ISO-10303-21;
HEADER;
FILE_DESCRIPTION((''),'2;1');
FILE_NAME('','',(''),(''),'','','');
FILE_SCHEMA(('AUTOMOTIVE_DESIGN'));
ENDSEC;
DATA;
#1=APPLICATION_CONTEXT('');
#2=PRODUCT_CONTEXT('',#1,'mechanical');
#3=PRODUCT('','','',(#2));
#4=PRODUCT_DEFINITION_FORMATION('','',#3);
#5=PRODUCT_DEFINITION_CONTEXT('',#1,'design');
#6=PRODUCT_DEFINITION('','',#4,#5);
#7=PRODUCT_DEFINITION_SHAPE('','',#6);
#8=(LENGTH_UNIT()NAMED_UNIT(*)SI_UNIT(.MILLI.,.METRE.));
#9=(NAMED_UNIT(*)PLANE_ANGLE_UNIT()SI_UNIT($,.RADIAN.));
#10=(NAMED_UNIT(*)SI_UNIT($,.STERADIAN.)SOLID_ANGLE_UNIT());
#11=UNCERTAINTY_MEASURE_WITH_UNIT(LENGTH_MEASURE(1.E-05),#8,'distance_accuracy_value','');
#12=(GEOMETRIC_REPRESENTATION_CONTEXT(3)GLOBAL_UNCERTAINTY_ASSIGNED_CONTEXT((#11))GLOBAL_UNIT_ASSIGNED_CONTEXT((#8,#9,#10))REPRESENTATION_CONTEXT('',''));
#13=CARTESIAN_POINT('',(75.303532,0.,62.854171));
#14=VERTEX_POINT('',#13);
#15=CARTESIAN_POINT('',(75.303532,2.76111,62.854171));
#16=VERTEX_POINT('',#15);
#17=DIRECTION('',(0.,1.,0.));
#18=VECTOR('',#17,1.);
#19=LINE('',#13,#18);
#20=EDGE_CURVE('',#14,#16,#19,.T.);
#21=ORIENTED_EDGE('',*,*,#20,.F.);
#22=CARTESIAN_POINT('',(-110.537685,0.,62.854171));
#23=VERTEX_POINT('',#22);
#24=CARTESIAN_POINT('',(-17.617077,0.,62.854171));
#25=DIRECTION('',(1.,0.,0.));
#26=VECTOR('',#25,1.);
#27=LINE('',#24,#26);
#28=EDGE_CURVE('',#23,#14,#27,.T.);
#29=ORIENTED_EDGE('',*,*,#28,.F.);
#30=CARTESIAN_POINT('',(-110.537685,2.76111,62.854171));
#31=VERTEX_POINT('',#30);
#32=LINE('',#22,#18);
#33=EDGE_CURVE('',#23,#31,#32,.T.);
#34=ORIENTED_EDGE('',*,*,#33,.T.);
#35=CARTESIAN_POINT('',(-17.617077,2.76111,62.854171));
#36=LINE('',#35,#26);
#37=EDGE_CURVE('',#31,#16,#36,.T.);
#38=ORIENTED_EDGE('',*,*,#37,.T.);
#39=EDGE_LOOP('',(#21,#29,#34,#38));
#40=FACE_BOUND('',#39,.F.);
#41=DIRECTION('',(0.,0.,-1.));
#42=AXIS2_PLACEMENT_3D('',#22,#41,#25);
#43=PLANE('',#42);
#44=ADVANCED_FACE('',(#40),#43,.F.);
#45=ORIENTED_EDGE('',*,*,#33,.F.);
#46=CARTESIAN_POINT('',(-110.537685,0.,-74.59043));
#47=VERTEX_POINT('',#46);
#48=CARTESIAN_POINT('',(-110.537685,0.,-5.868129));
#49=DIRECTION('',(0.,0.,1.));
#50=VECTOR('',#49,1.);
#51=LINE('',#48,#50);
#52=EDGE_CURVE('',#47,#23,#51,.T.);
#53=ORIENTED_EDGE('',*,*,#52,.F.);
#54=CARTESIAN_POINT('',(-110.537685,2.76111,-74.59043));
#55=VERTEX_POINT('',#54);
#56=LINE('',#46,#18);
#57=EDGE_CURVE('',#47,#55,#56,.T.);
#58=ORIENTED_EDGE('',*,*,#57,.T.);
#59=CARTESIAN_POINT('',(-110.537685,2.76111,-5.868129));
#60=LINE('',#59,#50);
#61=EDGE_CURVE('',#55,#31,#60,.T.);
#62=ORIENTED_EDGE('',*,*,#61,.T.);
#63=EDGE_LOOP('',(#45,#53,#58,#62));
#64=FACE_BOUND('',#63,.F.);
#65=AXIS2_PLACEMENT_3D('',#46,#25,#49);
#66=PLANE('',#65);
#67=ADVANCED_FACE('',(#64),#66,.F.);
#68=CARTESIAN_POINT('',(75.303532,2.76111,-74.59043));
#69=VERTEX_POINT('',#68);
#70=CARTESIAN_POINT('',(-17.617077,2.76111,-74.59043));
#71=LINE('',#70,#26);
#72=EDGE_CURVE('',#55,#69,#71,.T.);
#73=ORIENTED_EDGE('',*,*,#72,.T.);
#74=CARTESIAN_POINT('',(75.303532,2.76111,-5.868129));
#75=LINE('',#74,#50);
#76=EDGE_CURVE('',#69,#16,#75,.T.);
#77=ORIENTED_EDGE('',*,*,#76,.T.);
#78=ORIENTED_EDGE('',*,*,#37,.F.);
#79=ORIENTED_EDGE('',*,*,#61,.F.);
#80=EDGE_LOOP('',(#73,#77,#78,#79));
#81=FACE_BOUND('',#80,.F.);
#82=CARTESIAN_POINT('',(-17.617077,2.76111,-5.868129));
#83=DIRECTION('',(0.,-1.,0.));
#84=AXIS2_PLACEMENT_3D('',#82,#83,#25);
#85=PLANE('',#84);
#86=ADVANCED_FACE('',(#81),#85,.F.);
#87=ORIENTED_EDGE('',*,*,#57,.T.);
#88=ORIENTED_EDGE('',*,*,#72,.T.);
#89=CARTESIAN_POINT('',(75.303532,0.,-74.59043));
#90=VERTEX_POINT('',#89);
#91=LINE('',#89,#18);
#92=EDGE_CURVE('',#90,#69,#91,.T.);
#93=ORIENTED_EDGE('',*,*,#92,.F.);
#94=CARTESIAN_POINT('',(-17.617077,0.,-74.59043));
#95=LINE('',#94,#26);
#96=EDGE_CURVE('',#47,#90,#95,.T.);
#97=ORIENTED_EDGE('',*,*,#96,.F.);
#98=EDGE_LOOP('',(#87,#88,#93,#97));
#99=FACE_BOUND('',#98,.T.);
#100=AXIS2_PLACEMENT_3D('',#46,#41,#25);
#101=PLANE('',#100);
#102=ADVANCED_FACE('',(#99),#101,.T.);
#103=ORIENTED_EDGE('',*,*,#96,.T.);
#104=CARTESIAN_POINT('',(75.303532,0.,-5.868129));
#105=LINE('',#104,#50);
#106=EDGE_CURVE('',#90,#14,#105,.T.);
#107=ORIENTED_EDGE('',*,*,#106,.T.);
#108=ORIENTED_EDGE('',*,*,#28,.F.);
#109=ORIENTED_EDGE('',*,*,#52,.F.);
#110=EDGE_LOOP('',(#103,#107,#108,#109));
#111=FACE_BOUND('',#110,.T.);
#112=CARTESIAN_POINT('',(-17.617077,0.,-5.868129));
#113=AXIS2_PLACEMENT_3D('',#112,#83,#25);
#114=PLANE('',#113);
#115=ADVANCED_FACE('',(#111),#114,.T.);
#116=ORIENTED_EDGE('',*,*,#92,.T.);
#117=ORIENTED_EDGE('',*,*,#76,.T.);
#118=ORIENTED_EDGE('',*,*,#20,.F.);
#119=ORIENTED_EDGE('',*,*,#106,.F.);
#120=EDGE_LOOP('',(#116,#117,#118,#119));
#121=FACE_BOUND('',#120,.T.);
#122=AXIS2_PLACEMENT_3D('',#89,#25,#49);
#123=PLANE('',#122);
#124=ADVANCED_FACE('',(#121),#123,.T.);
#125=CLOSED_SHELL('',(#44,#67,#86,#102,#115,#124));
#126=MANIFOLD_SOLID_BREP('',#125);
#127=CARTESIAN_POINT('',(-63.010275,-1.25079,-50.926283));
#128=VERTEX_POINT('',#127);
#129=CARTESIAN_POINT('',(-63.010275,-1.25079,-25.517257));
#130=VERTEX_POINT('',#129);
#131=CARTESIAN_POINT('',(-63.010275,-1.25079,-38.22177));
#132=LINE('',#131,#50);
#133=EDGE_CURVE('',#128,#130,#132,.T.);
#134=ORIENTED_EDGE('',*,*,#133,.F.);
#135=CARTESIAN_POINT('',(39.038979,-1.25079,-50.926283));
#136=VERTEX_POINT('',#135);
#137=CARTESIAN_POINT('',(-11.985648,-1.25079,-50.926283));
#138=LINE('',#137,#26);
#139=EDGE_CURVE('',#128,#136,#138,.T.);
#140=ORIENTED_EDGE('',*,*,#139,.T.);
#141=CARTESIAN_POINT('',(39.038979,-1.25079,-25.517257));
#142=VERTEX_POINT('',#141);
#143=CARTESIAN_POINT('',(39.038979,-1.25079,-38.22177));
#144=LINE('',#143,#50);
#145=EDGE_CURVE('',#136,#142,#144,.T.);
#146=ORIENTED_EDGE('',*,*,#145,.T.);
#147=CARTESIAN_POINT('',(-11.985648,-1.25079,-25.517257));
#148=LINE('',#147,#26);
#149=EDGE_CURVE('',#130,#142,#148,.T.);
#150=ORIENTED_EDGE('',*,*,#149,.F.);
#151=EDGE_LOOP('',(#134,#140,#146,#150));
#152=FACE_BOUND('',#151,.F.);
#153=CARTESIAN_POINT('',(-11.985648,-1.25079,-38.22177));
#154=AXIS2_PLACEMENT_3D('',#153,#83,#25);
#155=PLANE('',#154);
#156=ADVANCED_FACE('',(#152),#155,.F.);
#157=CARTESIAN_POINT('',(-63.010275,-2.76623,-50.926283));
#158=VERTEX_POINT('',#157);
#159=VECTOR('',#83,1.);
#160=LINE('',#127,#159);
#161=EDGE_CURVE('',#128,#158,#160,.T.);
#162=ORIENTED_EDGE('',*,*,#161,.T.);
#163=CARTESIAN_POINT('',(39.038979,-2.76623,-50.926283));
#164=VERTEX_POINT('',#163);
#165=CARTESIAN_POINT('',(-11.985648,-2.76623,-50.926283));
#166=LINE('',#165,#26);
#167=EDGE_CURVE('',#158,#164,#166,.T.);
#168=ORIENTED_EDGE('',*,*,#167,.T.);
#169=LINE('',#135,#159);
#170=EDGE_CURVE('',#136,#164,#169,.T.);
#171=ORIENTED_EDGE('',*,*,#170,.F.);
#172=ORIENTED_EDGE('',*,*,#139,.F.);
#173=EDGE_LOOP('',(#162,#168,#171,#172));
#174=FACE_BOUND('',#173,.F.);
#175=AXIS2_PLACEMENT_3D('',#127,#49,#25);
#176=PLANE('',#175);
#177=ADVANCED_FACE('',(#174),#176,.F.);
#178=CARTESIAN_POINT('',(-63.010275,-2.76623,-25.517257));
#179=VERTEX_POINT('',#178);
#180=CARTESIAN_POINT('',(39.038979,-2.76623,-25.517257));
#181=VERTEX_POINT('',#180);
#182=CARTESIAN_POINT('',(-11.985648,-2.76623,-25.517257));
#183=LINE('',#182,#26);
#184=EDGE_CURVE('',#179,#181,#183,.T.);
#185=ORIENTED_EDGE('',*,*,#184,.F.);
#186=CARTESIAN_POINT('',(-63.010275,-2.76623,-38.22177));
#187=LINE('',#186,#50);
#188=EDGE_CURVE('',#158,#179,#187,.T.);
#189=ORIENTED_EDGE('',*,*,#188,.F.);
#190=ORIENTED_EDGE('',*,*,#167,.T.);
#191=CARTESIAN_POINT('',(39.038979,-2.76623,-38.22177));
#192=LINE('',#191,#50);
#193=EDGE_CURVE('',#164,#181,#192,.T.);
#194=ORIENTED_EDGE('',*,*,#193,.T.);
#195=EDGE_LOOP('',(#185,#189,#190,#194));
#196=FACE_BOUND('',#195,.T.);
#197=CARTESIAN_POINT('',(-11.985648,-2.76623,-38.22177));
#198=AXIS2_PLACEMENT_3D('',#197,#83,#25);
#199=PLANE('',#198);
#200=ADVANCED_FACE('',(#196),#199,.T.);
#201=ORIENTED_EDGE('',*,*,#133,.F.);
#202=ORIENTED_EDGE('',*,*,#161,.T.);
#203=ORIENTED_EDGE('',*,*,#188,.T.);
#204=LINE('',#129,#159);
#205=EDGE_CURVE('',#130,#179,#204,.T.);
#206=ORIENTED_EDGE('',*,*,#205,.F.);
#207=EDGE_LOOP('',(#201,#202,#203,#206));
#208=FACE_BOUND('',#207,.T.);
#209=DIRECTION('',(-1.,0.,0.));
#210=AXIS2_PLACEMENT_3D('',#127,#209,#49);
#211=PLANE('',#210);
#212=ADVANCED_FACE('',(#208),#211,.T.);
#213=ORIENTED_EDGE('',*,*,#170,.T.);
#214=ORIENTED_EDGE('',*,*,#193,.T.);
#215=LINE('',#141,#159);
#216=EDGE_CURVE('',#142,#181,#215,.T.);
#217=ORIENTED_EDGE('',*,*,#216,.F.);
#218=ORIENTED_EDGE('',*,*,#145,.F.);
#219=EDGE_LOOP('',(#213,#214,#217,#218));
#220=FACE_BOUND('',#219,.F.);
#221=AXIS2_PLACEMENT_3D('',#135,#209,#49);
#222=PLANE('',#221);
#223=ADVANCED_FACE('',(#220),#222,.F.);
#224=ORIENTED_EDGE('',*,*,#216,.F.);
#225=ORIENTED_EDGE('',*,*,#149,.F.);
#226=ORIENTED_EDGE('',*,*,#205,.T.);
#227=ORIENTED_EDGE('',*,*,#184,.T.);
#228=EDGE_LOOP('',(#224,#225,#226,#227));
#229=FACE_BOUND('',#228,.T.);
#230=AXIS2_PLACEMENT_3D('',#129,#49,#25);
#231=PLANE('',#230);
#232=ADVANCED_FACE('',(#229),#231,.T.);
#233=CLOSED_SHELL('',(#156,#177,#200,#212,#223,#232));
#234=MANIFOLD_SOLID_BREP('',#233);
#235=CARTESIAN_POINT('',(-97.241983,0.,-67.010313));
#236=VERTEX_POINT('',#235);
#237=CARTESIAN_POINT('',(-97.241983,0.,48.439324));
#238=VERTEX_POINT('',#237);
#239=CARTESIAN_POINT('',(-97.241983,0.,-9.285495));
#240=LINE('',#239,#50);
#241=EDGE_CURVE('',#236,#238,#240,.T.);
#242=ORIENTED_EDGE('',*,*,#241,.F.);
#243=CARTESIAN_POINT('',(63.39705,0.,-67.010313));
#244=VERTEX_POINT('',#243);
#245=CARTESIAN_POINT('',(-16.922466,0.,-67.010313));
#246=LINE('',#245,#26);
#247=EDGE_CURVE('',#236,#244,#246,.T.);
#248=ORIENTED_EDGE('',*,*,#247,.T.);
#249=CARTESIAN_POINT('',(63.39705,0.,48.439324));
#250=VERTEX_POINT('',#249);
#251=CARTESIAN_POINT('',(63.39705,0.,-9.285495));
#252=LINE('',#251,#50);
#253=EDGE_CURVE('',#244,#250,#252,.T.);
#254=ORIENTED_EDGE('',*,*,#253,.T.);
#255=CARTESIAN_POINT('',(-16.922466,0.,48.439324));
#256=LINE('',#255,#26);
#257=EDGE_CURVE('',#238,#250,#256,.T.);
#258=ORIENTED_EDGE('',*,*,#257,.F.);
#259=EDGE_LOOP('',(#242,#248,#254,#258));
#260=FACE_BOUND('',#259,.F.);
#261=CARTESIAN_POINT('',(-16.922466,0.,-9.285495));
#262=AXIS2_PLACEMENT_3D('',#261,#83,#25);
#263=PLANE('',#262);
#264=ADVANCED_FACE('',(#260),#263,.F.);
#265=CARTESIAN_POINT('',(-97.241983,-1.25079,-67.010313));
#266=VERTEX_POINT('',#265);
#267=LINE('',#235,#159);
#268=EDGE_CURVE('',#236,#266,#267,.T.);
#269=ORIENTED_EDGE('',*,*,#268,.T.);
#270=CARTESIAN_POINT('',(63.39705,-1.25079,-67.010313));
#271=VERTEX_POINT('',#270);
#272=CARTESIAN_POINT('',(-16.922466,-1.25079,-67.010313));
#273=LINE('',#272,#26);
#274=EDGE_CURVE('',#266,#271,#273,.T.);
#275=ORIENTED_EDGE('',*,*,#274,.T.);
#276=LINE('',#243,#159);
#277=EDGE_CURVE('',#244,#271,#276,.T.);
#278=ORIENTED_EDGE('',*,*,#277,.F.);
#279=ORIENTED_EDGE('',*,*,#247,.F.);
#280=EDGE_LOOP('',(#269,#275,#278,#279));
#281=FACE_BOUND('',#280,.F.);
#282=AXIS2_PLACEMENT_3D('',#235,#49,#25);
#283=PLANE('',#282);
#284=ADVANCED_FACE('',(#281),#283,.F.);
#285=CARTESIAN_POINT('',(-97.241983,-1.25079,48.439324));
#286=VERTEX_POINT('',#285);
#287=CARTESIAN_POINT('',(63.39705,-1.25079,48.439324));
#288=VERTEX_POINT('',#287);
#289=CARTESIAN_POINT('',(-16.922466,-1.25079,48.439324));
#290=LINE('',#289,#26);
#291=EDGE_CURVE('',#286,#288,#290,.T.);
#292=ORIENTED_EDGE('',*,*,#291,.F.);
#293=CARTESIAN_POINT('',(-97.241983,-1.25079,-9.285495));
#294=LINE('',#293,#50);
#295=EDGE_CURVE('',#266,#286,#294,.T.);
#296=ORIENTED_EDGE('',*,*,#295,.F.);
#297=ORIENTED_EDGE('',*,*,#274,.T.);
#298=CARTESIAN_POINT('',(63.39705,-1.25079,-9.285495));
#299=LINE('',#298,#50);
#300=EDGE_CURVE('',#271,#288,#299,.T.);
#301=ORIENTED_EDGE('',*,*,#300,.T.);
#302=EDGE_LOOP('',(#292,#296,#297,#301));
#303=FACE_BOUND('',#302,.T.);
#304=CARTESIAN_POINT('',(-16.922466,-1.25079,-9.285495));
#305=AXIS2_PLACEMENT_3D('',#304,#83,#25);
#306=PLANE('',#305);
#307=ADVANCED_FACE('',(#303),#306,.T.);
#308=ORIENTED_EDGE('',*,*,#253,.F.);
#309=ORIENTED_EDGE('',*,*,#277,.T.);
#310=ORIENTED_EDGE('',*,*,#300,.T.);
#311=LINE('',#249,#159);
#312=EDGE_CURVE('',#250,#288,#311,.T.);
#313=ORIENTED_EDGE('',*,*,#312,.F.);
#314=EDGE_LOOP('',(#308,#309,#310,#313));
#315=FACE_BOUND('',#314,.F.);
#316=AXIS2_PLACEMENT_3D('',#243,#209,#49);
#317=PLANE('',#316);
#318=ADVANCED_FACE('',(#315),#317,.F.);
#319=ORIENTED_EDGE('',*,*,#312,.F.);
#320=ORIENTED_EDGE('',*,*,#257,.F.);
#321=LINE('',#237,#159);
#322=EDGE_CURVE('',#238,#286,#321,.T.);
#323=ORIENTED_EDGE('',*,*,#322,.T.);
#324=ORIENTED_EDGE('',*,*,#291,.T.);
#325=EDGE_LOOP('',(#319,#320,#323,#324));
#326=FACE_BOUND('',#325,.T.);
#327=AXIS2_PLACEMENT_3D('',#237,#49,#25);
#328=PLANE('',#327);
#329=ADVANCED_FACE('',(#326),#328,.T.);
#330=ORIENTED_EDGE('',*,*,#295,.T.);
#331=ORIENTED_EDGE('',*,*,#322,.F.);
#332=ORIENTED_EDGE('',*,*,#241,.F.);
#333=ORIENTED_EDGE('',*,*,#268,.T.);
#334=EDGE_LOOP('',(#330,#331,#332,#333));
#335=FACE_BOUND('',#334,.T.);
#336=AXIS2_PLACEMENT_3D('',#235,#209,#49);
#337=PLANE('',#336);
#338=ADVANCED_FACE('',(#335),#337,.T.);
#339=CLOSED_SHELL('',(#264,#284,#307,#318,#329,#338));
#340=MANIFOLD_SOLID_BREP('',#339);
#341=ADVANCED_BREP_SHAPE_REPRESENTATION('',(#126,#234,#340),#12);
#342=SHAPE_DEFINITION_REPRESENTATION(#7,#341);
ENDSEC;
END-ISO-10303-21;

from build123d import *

# Parameters (mm, degrees)
F2_W     = 185.8412176371
F2_H     = 137.4446004629
F3_DEPTH = 2.76111
F5_W     = 160.6390327215
F5_H     = 115.4496371746
F6_DEPTH = 1.25079
F7_W     = 102.049253881
F7_H     = 25.4090260714
F8_DEPTH = 1.51544


# Not quite as in the source:
# - the program builds the solid bodies; features that only make, move or delete a surface that nothing else refers to are left out


with BuildPart() as f3:
    # F2 (on Front) → F3 (new body)
    with BuildSketch(Plane.XZ):
        with Locations((-17.6170766354, -5.8681294322)):
            Rectangle(F2_W, F2_H)
    extrude(amount=-F3_DEPTH)


with BuildPart() as f6:
    # F5 (on face) → F6 (new body)
    with BuildSketch(Plane.XZ):
        with Locations((-16.9224664569, -9.2854946852)):
            Rectangle(F5_W, F5_H)
    extrude(amount=F6_DEPTH)


with BuildPart() as f8:
    # F7 (on face) → F8 (new body)
    with BuildSketch(Plane.XZ.offset(1.25079)):
        with Locations((-11.9856484234, -38.2217699662)):
            Rectangle(F7_W, F7_H)
    extrude(amount=F8_DEPTH)


solid = Compound([f3.part, f6.part, f8.part])
